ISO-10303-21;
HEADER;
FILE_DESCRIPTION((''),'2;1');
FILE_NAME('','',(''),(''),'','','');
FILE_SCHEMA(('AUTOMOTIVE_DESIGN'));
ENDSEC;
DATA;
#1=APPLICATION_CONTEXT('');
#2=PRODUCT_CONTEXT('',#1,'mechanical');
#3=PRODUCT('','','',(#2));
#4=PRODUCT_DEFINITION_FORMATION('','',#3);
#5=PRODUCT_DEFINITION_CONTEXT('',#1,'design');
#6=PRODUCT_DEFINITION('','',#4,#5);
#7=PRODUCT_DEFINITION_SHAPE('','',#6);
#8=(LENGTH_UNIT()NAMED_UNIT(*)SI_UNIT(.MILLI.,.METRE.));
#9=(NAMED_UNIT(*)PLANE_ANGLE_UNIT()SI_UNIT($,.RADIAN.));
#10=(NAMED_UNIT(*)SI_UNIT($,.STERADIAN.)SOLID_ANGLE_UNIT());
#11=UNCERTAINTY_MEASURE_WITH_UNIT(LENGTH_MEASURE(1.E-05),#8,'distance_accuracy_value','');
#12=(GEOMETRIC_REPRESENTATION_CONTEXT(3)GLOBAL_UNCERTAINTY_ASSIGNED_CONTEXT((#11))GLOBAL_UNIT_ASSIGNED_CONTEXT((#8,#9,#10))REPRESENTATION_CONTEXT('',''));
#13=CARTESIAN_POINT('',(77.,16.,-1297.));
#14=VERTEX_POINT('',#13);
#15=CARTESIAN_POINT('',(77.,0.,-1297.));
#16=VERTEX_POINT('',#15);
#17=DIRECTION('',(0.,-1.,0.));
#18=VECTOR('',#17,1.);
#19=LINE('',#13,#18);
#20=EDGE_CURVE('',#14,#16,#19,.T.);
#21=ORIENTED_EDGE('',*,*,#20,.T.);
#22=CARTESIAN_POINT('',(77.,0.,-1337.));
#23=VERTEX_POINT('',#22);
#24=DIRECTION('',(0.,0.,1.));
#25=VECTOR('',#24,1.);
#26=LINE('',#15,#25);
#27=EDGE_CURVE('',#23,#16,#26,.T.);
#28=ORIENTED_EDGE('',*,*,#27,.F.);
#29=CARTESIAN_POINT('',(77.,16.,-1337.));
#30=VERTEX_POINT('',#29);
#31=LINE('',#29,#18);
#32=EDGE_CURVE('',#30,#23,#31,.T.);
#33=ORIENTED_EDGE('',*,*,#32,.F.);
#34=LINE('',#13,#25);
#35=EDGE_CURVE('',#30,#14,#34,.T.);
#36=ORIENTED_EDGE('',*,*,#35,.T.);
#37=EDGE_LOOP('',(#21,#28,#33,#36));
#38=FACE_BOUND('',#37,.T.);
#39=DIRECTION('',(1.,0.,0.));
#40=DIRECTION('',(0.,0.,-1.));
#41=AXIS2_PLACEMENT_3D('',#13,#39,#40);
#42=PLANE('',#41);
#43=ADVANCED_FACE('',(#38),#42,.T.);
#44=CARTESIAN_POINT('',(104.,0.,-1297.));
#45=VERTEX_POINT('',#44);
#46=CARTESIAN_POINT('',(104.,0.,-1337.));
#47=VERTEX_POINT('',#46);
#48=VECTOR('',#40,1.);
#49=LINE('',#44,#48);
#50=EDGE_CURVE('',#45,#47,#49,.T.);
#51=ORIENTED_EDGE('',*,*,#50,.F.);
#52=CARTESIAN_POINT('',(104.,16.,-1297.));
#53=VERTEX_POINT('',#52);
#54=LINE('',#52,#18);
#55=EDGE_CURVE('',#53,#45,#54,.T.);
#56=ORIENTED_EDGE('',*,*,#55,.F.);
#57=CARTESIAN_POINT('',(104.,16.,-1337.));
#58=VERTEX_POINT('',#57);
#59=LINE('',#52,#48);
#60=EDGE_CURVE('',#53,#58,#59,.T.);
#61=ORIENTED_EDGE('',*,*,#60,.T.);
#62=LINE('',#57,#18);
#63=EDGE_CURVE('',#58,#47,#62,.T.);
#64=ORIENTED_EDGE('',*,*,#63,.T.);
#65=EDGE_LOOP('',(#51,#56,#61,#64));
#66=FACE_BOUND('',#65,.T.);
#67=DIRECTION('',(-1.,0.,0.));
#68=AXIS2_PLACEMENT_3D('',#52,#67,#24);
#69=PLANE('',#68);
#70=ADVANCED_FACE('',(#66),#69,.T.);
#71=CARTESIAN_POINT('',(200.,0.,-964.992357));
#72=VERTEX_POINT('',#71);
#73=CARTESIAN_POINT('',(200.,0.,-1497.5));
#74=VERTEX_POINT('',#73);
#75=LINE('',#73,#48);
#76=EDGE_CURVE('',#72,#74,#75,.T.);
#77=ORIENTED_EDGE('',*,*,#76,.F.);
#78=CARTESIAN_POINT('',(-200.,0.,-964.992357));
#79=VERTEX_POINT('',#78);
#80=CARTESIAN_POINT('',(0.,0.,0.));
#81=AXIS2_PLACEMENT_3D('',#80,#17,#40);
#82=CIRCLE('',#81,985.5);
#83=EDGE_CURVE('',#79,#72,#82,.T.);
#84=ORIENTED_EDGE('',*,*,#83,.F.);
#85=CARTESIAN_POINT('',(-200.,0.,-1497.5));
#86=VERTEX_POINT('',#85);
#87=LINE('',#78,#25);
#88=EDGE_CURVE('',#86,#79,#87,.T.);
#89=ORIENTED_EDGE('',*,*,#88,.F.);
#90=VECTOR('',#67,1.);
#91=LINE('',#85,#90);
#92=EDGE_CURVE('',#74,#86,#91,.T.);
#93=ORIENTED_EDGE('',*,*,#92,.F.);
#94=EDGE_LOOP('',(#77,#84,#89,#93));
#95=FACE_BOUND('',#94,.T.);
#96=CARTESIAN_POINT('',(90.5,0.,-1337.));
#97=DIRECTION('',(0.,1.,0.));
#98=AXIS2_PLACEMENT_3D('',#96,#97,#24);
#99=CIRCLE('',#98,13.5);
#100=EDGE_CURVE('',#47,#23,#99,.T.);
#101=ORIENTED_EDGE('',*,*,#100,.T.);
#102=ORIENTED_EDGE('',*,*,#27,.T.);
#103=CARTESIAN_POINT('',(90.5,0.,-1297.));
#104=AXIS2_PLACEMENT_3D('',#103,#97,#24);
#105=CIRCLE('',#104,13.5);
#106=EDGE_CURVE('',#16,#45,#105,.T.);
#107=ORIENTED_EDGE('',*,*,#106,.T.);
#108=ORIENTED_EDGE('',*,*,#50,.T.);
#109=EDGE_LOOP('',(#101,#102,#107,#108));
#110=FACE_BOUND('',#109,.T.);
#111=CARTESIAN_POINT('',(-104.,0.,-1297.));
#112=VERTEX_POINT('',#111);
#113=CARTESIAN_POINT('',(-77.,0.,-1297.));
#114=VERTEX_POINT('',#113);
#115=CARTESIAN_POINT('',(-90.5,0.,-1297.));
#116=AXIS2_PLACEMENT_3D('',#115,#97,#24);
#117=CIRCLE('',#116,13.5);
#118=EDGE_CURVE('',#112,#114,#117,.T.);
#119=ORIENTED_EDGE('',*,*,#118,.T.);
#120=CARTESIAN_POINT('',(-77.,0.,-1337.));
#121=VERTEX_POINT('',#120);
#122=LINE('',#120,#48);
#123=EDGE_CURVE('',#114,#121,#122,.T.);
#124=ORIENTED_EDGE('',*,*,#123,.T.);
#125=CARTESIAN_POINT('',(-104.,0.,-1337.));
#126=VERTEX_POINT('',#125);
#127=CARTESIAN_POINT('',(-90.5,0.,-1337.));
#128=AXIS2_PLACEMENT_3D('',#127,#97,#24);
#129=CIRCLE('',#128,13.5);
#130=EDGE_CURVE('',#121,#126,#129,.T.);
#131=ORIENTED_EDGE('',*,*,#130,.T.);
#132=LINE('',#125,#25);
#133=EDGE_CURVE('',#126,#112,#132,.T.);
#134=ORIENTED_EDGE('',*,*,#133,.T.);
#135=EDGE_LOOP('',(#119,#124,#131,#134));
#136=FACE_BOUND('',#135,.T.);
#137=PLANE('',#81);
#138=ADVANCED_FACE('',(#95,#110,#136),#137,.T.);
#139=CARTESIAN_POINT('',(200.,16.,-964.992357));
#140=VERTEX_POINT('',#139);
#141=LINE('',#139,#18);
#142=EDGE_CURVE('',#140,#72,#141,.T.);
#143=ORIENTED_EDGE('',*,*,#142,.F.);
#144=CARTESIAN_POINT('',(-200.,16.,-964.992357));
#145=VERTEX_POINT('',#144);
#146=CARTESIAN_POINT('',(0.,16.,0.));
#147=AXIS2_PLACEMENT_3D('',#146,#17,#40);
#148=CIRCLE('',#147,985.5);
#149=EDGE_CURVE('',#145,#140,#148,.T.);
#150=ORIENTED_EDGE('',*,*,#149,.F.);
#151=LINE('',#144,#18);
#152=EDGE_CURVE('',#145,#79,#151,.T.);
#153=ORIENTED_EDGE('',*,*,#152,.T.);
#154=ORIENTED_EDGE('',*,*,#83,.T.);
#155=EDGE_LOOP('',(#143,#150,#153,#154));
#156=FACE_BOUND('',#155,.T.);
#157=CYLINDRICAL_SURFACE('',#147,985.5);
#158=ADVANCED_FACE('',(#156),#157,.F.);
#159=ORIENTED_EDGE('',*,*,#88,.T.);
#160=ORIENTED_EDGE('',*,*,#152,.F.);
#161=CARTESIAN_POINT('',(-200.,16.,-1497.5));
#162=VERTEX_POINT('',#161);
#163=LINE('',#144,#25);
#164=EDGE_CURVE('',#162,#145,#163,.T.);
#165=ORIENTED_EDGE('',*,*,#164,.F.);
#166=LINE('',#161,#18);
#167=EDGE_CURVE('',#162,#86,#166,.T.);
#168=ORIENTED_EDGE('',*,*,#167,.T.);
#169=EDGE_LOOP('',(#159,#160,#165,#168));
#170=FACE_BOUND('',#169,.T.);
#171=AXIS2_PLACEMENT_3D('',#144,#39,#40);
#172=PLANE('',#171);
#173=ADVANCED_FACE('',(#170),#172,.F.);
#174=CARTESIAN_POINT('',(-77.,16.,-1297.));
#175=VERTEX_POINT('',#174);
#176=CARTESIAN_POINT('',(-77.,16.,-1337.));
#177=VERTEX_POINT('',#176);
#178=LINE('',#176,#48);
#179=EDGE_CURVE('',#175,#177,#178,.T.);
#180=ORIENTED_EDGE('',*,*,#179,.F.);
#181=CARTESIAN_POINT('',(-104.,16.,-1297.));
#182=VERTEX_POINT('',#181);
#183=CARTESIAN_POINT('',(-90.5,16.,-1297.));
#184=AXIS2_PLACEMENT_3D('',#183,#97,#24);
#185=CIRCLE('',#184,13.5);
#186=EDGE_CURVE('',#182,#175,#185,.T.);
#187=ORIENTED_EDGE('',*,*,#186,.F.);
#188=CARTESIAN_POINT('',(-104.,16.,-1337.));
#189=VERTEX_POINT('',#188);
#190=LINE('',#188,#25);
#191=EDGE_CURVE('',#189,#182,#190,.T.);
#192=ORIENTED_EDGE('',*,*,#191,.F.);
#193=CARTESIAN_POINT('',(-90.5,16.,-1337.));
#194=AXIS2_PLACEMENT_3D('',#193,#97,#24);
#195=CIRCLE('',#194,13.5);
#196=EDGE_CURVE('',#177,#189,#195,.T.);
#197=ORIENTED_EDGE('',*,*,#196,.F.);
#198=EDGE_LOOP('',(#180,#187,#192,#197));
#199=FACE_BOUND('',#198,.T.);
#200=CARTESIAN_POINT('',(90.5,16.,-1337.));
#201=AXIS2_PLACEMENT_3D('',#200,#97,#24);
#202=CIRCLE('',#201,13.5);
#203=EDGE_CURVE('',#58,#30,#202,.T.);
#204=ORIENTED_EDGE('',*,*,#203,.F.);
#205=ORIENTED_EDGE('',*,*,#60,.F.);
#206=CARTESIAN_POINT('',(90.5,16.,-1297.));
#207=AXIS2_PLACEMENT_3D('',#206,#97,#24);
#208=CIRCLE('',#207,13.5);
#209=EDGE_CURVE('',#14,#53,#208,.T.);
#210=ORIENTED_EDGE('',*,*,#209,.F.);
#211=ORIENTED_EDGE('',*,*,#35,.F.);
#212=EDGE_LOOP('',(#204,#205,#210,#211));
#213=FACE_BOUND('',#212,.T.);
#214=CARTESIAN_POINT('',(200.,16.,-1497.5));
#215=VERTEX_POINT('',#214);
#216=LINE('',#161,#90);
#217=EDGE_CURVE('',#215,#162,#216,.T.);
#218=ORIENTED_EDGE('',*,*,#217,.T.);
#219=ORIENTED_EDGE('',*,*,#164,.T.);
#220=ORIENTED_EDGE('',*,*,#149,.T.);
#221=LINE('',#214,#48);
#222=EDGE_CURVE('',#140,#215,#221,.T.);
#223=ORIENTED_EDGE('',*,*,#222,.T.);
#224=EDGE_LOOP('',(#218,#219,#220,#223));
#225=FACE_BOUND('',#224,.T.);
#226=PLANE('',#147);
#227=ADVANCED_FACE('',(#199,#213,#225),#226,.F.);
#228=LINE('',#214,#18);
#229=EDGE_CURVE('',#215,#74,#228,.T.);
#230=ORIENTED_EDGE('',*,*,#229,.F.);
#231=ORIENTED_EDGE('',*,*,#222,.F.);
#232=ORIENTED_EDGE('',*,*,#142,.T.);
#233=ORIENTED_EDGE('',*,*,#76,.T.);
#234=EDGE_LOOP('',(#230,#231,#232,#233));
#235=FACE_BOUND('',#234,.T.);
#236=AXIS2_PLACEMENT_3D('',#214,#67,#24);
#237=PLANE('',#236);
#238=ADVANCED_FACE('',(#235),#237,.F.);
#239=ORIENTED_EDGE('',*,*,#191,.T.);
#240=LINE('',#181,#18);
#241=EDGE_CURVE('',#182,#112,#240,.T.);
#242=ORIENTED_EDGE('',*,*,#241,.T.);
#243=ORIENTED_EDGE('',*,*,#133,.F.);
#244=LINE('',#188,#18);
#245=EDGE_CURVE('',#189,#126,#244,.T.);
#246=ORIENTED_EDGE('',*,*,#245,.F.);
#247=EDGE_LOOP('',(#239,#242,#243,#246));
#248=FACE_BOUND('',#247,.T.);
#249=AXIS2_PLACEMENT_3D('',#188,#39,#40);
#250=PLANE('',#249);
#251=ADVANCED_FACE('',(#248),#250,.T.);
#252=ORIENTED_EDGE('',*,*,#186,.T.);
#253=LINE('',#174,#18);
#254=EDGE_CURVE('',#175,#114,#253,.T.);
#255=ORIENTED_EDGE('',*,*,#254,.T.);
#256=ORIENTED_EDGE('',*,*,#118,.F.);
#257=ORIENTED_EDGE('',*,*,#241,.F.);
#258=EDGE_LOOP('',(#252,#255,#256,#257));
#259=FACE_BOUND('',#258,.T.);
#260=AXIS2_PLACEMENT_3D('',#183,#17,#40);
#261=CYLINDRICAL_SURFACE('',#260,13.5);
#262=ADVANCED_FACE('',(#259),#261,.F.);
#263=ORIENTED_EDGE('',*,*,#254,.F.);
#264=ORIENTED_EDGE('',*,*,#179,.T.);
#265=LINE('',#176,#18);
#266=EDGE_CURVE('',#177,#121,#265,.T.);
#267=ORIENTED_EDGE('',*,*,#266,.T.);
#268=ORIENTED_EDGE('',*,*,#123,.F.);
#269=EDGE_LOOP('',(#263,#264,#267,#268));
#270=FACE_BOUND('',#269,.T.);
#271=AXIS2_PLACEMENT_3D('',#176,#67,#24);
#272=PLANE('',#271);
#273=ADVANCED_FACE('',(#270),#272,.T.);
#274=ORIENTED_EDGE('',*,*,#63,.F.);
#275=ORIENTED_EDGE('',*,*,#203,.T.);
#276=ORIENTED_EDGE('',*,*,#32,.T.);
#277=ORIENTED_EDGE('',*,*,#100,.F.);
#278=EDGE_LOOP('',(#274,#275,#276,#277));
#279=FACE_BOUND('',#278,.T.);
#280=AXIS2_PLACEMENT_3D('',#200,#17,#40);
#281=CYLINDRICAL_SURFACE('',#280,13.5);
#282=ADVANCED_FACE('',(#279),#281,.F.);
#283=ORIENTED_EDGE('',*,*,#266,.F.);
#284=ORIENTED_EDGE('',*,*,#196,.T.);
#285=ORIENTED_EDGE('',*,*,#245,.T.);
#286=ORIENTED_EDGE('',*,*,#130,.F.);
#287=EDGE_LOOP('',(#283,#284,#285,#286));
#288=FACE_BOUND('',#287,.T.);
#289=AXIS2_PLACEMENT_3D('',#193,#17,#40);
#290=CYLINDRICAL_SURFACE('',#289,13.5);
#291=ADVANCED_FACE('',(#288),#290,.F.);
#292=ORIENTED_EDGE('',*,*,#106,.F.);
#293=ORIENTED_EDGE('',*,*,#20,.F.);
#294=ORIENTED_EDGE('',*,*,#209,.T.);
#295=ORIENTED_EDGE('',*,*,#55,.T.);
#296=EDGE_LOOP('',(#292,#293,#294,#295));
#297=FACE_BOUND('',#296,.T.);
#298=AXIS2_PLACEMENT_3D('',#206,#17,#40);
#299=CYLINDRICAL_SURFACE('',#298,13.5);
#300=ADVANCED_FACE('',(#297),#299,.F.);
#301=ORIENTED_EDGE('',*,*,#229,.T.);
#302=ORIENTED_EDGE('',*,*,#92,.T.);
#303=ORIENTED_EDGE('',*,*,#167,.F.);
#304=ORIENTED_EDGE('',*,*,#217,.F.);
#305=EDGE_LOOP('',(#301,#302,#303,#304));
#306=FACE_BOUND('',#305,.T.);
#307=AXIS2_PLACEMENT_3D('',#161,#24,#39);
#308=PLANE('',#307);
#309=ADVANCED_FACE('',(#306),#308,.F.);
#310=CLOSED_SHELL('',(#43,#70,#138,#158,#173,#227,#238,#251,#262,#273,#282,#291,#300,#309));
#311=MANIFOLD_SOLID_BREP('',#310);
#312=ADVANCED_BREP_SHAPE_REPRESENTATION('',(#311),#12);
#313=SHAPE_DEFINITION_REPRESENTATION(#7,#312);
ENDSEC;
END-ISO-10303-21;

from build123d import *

# Parameters (mm, degrees)
SM_BASE_FLANGE_1_DEPTH = 16


# Sheet-metal steps are written as plain solids
with BuildPart() as part:
    # Sketch 1 → 基体-法兰1 (new body)
    with BuildSketch(Plane(origin=(0, 0, 0), x_dir=(1, 0, 0), z_dir=(0, 1, 0))):
        with BuildLine():
            Line((-200, 964.992357483), (-200, 1497.5))
            Line((-200, 1497.5), (200, 1497.5))
            Line((200, 1497.5), (200, 964.992357483))
            ThreePointArc((200, 964.992357483), (0, 985.5), (-200, 964.992357483))
        make_face()
        with BuildLine():
            Line((-77, 1337), (-77, 1297))
            ThreePointArc((-77, 1297), (-90.5, 1283.5), (-104, 1297))
            Line((-104, 1297), (-104, 1337))
            ThreePointArc((-104, 1337), (-90.5, 1350.5), (-77, 1337))
        make_face(mode=Mode.SUBTRACT)
        with BuildLine():
            Line((77, 1297), (77, 1337))
            ThreePointArc((77, 1337), (90.5, 1350.5), (104, 1337))
            Line((104, 1337), (104, 1297))
            ThreePointArc((104, 1297), (90.5, 1283.5), (77, 1297))
        make_face(mode=Mode.SUBTRACT)
    extrude(amount=SM_BASE_FLANGE_1_DEPTH)


solid = part.part
